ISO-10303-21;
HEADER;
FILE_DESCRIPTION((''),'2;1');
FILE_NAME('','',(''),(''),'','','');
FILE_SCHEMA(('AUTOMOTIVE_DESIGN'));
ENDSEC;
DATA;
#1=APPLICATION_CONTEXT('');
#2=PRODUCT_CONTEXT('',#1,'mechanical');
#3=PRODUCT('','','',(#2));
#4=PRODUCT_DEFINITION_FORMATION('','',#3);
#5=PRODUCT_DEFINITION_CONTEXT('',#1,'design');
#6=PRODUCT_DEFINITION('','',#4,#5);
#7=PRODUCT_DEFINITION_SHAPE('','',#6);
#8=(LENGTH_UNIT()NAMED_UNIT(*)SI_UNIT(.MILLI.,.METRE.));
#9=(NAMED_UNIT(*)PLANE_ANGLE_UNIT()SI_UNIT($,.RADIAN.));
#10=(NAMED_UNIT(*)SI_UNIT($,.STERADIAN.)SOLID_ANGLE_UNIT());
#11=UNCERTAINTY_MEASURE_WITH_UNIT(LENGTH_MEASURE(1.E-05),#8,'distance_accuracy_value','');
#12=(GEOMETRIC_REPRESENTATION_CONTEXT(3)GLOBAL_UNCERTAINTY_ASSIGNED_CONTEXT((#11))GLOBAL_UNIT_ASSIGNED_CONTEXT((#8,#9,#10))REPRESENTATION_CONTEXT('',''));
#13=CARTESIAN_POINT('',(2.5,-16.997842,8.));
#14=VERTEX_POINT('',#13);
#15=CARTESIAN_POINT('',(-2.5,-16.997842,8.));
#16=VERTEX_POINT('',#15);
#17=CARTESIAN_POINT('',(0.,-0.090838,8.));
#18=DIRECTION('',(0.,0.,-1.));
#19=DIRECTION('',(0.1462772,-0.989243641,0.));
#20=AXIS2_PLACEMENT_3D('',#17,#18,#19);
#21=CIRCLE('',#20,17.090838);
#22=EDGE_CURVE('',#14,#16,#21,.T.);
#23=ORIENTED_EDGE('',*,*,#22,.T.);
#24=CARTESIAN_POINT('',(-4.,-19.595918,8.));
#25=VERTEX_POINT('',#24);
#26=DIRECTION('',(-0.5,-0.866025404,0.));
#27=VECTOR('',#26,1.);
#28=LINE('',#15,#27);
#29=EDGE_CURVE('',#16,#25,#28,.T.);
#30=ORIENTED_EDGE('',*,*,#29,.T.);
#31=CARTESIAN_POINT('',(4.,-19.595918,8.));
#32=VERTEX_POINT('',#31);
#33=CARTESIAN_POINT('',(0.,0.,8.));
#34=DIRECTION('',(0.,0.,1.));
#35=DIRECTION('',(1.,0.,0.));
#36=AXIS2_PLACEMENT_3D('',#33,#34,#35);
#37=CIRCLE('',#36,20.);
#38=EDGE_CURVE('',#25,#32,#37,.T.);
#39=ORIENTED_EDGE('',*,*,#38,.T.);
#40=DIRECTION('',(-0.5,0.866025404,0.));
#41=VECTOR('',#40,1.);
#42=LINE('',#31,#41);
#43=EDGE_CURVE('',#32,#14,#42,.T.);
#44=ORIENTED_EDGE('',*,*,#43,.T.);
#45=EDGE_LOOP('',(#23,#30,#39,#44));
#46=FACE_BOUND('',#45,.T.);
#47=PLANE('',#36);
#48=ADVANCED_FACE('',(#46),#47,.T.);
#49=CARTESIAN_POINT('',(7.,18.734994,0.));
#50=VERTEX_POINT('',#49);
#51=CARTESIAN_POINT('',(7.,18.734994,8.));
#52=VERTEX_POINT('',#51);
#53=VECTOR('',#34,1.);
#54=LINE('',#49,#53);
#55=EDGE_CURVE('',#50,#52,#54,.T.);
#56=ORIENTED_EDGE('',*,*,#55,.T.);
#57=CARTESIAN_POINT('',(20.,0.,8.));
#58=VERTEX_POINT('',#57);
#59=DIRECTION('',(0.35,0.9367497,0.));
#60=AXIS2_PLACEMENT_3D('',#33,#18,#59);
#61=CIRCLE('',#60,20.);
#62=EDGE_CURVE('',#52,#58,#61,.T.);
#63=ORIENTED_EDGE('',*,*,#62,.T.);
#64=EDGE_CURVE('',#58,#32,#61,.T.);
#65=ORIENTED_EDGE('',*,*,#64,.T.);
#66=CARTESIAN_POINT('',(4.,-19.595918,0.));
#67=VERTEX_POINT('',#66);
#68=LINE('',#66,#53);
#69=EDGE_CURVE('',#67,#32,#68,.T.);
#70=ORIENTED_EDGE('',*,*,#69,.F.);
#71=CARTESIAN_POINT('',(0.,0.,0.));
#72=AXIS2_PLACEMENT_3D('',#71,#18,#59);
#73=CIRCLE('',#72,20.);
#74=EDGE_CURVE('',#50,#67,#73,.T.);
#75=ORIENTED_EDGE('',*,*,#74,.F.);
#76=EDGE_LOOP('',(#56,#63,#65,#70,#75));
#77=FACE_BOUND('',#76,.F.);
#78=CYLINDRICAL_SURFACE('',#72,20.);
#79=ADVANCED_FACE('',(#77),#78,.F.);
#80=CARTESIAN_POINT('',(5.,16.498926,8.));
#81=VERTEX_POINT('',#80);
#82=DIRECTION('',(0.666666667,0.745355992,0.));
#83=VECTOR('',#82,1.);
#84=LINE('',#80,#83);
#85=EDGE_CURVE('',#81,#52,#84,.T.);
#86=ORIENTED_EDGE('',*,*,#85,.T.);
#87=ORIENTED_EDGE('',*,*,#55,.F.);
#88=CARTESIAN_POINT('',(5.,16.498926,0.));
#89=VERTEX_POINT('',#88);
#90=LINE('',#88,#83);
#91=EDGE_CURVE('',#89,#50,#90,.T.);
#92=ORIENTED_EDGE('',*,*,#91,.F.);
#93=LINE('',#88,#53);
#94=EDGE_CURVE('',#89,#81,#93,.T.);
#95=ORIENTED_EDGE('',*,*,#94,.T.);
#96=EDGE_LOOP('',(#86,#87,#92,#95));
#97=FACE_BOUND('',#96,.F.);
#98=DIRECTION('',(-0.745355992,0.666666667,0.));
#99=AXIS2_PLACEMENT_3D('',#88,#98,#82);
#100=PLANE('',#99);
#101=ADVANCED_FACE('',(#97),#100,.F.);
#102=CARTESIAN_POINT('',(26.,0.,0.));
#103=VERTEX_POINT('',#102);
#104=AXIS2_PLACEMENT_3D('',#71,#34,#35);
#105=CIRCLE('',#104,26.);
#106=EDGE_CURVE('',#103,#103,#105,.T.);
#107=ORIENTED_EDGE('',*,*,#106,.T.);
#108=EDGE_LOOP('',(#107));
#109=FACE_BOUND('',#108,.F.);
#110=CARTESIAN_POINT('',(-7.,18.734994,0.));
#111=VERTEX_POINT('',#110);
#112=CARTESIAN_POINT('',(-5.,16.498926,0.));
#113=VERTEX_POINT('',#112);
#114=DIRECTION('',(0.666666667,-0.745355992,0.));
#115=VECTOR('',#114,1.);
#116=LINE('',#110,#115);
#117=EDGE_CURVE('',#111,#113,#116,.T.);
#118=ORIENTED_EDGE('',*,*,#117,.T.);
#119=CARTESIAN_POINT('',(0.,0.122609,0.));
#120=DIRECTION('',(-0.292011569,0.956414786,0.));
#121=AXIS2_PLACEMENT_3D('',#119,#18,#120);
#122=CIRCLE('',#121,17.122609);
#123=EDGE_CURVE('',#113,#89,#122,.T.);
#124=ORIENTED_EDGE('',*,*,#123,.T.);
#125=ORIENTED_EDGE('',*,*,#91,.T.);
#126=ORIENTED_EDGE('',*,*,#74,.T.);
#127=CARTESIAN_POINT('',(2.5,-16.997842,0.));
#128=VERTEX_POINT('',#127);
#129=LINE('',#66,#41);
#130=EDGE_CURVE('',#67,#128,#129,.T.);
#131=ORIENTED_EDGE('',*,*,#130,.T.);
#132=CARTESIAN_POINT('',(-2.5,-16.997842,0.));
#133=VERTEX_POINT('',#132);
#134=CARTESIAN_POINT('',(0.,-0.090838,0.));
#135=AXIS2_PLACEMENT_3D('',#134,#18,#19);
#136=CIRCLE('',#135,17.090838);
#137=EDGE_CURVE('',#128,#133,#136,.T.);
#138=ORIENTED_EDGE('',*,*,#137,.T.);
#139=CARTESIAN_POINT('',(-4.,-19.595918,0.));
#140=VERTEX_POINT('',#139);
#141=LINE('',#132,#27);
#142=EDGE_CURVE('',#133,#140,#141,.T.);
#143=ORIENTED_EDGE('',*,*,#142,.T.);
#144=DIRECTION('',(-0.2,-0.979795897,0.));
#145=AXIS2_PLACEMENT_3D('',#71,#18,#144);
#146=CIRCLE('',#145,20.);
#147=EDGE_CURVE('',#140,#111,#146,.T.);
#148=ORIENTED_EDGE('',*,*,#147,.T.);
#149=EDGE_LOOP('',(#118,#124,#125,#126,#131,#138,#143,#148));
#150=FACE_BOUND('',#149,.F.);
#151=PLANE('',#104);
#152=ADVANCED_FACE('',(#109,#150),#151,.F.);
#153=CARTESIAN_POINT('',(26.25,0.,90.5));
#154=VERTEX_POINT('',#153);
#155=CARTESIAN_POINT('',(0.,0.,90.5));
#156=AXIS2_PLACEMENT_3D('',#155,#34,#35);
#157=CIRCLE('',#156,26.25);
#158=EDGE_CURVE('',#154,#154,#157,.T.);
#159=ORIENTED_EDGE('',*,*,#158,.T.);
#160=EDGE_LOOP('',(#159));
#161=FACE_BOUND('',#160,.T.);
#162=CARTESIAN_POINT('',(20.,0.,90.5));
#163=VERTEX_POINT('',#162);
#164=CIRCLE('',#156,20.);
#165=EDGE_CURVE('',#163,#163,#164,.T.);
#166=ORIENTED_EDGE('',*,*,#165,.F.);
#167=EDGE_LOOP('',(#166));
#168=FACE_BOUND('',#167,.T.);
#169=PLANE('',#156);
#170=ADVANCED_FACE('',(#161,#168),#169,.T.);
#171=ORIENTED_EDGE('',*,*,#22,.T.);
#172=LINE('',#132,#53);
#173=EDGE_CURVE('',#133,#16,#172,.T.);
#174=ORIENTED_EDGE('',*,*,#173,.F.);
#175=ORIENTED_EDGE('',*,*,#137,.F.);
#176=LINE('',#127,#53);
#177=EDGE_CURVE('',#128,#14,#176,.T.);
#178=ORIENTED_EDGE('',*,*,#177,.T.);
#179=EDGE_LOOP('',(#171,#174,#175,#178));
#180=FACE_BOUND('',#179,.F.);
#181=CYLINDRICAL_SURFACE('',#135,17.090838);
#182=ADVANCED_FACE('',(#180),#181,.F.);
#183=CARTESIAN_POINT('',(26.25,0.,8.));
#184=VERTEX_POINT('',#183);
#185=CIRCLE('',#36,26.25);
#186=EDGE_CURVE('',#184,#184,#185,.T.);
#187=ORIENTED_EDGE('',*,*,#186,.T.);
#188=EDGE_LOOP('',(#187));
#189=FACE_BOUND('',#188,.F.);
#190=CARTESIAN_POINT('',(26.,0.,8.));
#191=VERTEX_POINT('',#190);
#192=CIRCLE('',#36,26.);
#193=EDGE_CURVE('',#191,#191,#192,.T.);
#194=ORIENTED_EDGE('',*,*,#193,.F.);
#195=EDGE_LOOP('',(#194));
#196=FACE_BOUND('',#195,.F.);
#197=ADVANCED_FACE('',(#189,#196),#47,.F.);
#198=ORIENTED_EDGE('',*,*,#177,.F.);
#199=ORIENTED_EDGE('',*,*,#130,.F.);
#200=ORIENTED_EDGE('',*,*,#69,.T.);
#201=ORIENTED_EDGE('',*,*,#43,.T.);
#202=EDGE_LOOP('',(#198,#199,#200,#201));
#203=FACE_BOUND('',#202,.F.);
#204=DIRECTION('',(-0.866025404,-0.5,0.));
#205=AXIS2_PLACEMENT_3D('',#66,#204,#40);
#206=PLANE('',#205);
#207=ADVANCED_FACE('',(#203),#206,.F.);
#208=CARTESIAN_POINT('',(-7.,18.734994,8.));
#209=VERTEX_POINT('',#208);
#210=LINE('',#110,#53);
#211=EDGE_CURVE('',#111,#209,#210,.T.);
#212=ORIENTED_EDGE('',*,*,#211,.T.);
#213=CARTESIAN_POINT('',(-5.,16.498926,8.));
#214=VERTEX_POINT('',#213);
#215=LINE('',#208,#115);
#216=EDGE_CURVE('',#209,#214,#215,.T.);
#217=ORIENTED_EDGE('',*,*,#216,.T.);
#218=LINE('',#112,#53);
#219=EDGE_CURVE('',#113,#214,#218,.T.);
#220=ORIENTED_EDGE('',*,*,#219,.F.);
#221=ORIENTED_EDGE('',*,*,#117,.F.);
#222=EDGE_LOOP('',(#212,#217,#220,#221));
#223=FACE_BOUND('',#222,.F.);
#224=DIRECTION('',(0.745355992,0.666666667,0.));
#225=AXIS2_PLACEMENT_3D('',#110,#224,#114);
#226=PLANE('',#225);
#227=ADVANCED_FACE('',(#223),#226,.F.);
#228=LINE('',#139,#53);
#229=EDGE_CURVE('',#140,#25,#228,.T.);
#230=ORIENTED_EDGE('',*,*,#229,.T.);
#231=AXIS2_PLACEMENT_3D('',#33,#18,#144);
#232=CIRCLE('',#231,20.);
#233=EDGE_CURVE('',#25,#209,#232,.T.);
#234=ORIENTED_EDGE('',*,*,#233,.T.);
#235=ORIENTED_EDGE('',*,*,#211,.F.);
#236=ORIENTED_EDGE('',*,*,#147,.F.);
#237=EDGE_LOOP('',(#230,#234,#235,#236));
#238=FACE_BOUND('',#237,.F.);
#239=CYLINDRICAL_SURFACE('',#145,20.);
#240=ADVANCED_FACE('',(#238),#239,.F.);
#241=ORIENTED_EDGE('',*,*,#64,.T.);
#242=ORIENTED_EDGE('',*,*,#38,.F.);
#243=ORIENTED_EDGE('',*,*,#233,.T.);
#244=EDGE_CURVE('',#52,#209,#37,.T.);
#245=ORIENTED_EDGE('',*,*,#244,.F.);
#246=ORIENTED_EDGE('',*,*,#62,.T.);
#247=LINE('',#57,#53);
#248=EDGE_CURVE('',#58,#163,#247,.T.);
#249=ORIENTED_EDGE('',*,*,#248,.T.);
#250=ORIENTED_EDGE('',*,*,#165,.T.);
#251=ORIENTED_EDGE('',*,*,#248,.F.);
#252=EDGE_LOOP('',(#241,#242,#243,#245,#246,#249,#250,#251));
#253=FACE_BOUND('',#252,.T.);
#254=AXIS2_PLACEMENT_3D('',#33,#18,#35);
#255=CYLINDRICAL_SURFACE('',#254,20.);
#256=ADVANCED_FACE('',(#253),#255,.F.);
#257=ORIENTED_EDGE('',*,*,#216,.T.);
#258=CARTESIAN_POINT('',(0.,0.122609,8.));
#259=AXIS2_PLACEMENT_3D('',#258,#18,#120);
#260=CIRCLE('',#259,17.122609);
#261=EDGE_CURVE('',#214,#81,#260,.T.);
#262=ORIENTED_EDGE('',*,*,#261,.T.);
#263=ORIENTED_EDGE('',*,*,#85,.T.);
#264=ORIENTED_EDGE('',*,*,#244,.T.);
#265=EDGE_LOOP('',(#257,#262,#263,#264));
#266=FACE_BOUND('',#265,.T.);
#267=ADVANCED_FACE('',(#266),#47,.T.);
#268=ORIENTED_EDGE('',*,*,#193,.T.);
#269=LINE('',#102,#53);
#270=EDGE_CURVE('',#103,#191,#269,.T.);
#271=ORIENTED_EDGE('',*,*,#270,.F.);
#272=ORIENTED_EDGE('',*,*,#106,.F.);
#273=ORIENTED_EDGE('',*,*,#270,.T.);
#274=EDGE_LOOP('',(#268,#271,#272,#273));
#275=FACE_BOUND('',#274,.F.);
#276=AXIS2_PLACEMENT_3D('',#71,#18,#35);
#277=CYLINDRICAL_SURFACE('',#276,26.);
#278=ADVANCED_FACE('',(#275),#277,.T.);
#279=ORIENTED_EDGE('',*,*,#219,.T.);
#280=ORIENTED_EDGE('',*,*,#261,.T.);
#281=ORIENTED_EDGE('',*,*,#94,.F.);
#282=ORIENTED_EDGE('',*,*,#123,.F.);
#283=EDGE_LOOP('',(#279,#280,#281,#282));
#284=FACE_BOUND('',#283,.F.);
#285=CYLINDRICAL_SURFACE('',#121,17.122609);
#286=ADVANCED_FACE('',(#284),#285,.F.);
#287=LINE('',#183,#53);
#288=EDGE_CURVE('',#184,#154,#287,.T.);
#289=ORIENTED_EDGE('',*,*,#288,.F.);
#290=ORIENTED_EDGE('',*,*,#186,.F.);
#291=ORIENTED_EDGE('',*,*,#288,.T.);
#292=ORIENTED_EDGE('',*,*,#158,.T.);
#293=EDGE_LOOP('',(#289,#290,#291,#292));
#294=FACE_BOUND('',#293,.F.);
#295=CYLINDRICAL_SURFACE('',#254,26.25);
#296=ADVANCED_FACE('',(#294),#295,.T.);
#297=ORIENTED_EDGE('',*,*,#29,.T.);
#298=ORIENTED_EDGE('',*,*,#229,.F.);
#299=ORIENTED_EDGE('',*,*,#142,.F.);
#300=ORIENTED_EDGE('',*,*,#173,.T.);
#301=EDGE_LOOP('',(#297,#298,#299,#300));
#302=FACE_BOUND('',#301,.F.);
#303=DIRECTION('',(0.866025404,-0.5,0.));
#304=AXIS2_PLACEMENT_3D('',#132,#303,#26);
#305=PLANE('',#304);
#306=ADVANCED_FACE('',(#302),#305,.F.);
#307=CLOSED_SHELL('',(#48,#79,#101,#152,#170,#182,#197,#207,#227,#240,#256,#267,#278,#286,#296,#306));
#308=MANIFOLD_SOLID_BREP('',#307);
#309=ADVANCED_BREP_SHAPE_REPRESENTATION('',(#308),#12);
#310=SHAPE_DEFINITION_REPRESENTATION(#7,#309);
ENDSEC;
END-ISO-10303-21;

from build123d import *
from build123d import SkipClean  # not in build123d's __all__

# Parameters (mm, degrees)
F0_R     = 26
F1_DEPTH = 8
F2_R     = 26.25
F2_R_2   = 20
F3_DEPTH = 82.5


with BuildPart() as f1:
    # F0 (on Top) → F1 (new body)
    with BuildSketch(Plane.XY):
        Circle(F0_R)
        with BuildLine():
            ThreePointArc((7, 18.7349939952), (19.9390246123, -1.5605439791), (4, -19.5959179423))
            Line((4, -19.5959179423), (2.5, -16.9978417309))
            ThreePointArc((2.5, -16.9978417309), (0, -17.1816769299), (-2.5, -16.9978417309))
            Line((-2.5, -16.9978417309), (-4, -19.5959179423))
            ThreePointArc((-4, -19.5959179423), (-19.9390246123, -1.5605439791), (-7, 18.7349939952))
            Line((-7, 18.7349939952), (-5, 16.4989260177))
            ThreePointArc((-5, 16.4989260177), (0, 17.2452185999), (5, 16.4989260177))
            Line((5, 16.4989260177), (7, 18.7349939952))
        make_face(mode=Mode.SUBTRACT)
    extrude(amount=F1_DEPTH)

    # F2 (on face) → F3 (join)
    with BuildSketch(Plane.XY.offset(8)):
        Circle(F2_R)
        Circle(F2_R_2, mode=Mode.SUBTRACT)
    with SkipClean():  # cleaning this boolean's faces spoils the solid; the shape is the same uncleaned
        extrude(amount=F3_DEPTH)


solid = f1.part
